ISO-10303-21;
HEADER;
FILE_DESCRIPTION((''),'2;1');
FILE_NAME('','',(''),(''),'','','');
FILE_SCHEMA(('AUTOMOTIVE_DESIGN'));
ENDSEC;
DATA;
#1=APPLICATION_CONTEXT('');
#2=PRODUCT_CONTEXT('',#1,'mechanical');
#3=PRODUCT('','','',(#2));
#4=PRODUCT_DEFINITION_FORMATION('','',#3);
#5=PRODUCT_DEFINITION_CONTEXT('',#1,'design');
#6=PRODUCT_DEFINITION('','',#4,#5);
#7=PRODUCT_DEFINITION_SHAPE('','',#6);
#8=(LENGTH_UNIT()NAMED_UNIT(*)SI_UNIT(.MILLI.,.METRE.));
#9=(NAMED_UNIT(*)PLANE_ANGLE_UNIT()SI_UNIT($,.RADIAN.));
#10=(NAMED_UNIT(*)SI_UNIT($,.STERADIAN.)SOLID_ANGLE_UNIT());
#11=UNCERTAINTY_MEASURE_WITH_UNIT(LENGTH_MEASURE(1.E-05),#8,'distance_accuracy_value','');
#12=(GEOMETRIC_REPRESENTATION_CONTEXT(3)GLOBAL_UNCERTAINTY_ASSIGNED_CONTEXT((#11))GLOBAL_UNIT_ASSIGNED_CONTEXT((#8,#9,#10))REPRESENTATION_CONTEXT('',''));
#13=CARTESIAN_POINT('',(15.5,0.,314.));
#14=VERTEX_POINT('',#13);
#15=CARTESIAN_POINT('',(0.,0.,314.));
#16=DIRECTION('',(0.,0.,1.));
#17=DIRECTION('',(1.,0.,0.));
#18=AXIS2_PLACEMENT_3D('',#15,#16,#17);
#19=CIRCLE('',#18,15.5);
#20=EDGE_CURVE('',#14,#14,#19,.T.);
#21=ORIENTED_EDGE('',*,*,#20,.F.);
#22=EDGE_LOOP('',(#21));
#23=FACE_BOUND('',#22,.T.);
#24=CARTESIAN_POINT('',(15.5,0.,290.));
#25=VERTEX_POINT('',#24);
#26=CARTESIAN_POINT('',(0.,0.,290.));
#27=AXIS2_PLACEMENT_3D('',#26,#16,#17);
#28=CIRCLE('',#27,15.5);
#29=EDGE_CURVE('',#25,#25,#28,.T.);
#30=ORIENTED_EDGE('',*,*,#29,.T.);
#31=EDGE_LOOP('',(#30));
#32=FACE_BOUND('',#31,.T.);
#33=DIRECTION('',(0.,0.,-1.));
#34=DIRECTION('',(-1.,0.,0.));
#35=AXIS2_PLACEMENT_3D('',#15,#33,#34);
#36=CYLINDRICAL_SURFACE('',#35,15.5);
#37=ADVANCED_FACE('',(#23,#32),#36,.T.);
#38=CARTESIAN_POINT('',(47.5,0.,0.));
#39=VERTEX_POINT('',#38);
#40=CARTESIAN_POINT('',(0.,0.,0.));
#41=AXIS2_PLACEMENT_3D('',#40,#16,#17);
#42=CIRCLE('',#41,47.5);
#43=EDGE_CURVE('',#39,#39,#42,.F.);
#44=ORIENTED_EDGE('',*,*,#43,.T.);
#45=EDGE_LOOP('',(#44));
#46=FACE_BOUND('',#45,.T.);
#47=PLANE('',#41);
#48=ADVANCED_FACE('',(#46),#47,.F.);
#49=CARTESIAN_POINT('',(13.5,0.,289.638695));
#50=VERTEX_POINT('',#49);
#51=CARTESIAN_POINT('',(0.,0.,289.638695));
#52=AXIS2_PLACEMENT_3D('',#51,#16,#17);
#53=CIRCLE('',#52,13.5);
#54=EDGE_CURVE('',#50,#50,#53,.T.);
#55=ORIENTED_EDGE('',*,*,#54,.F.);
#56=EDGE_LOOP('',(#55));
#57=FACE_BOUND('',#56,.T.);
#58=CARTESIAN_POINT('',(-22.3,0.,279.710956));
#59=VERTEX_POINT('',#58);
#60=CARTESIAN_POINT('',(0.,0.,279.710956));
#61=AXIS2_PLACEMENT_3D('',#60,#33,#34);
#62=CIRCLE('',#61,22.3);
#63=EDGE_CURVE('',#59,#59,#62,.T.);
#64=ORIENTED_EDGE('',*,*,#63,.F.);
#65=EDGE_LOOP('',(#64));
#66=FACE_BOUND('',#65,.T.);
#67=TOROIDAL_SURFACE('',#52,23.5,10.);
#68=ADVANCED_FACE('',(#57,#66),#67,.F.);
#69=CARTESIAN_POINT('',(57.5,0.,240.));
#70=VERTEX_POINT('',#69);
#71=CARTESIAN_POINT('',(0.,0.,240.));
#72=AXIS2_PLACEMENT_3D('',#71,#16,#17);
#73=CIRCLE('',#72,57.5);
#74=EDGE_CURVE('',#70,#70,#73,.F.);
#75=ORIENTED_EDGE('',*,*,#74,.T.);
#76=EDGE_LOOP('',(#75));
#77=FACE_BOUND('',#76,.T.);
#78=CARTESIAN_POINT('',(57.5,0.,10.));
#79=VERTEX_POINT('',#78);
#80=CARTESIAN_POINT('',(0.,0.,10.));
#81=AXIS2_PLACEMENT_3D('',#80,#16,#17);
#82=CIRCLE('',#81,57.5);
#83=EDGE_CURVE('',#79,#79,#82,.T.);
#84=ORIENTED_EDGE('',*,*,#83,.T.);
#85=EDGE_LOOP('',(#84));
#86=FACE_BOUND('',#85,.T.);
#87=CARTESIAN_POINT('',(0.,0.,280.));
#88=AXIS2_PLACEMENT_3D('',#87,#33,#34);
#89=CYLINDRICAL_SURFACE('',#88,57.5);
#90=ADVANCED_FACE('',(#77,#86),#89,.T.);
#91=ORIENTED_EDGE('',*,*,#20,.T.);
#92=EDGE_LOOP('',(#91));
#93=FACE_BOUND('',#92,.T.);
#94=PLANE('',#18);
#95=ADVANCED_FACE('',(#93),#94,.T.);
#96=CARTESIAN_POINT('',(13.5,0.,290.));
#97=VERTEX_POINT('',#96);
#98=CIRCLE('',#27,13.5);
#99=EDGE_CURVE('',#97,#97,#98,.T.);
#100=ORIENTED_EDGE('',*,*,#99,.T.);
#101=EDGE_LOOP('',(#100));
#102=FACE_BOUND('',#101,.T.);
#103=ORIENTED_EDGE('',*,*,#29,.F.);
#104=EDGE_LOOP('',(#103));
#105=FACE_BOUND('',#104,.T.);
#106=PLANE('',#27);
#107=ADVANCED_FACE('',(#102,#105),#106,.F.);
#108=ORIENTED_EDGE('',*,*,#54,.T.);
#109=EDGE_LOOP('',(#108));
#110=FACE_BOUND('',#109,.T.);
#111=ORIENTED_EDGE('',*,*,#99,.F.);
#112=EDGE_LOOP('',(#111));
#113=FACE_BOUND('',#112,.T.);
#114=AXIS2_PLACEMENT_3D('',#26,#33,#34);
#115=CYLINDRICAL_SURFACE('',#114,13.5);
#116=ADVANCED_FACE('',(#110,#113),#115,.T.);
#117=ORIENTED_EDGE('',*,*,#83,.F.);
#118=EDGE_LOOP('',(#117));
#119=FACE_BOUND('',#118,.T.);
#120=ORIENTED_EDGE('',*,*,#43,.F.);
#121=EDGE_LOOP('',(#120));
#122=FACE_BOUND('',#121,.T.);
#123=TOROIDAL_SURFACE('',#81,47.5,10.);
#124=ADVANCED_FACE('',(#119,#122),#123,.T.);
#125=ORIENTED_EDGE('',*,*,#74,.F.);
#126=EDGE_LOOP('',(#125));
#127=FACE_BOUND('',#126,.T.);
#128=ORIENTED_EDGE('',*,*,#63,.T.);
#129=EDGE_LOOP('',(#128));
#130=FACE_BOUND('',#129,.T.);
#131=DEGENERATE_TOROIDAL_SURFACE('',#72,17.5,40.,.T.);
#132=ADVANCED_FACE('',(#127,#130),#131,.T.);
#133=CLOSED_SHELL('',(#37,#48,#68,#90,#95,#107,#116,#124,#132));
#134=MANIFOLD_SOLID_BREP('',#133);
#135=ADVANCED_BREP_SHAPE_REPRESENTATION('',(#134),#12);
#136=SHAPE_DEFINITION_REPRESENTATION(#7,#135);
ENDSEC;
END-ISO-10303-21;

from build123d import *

# Parameters (mm, degrees)
SKETCH1_R           = 57.5
BOSS_EXTRUDE1_DEPTH = 280
FILLET1_R           = 40
SKETCH2_R           = 13.5
BOSS_EXTRUDE2_DEPTH = 10
SKETCH3_R           = 15.5
BOSS_EXTRUDE3_DEPTH = 24
FILLET2_R           = 10
FILLET3_R           = 10


with BuildPart() as part:
    # Sketch1 → Boss-Extrude1 (new body)
    with BuildSketch(Plane.XY):
        Circle(SKETCH1_R)
    extrude(amount=BOSS_EXTRUDE1_DEPTH)

    # Fillet1
    fillet1_edges = [part.edges().sort_by_distance(p)[0] for p in [
        (-57.5, 0, 280),
    ]]
    fillet(fillet1_edges, radius=FILLET1_R)

    # Sketch2 → Boss-Extrude2 (add)
    with BuildSketch(Plane.XY.offset(280)):
        Circle(SKETCH2_R)
    extrude(amount=BOSS_EXTRUDE2_DEPTH)

    # Sketch3 → Boss-Extrude3 (add)
    with BuildSketch(Plane.XY.offset(290)):
        Circle(SKETCH3_R)
    extrude(amount=BOSS_EXTRUDE3_DEPTH)

    # Fillet2
    fillet2_edges = [part.edges().sort_by_distance(p)[0] for p in [
        (-13.5, 0, 280),
    ]]
    fillet(fillet2_edges, radius=FILLET2_R - 0.0001)  # a hair under: the kernel refuses the full size

    # Fillet3
    fillet3_edges = [part.edges().sort_by_distance(p)[0] for p in [
        (-57.5, 0, 0),
    ]]
    fillet(fillet3_edges, radius=FILLET3_R)


solid = part.part
